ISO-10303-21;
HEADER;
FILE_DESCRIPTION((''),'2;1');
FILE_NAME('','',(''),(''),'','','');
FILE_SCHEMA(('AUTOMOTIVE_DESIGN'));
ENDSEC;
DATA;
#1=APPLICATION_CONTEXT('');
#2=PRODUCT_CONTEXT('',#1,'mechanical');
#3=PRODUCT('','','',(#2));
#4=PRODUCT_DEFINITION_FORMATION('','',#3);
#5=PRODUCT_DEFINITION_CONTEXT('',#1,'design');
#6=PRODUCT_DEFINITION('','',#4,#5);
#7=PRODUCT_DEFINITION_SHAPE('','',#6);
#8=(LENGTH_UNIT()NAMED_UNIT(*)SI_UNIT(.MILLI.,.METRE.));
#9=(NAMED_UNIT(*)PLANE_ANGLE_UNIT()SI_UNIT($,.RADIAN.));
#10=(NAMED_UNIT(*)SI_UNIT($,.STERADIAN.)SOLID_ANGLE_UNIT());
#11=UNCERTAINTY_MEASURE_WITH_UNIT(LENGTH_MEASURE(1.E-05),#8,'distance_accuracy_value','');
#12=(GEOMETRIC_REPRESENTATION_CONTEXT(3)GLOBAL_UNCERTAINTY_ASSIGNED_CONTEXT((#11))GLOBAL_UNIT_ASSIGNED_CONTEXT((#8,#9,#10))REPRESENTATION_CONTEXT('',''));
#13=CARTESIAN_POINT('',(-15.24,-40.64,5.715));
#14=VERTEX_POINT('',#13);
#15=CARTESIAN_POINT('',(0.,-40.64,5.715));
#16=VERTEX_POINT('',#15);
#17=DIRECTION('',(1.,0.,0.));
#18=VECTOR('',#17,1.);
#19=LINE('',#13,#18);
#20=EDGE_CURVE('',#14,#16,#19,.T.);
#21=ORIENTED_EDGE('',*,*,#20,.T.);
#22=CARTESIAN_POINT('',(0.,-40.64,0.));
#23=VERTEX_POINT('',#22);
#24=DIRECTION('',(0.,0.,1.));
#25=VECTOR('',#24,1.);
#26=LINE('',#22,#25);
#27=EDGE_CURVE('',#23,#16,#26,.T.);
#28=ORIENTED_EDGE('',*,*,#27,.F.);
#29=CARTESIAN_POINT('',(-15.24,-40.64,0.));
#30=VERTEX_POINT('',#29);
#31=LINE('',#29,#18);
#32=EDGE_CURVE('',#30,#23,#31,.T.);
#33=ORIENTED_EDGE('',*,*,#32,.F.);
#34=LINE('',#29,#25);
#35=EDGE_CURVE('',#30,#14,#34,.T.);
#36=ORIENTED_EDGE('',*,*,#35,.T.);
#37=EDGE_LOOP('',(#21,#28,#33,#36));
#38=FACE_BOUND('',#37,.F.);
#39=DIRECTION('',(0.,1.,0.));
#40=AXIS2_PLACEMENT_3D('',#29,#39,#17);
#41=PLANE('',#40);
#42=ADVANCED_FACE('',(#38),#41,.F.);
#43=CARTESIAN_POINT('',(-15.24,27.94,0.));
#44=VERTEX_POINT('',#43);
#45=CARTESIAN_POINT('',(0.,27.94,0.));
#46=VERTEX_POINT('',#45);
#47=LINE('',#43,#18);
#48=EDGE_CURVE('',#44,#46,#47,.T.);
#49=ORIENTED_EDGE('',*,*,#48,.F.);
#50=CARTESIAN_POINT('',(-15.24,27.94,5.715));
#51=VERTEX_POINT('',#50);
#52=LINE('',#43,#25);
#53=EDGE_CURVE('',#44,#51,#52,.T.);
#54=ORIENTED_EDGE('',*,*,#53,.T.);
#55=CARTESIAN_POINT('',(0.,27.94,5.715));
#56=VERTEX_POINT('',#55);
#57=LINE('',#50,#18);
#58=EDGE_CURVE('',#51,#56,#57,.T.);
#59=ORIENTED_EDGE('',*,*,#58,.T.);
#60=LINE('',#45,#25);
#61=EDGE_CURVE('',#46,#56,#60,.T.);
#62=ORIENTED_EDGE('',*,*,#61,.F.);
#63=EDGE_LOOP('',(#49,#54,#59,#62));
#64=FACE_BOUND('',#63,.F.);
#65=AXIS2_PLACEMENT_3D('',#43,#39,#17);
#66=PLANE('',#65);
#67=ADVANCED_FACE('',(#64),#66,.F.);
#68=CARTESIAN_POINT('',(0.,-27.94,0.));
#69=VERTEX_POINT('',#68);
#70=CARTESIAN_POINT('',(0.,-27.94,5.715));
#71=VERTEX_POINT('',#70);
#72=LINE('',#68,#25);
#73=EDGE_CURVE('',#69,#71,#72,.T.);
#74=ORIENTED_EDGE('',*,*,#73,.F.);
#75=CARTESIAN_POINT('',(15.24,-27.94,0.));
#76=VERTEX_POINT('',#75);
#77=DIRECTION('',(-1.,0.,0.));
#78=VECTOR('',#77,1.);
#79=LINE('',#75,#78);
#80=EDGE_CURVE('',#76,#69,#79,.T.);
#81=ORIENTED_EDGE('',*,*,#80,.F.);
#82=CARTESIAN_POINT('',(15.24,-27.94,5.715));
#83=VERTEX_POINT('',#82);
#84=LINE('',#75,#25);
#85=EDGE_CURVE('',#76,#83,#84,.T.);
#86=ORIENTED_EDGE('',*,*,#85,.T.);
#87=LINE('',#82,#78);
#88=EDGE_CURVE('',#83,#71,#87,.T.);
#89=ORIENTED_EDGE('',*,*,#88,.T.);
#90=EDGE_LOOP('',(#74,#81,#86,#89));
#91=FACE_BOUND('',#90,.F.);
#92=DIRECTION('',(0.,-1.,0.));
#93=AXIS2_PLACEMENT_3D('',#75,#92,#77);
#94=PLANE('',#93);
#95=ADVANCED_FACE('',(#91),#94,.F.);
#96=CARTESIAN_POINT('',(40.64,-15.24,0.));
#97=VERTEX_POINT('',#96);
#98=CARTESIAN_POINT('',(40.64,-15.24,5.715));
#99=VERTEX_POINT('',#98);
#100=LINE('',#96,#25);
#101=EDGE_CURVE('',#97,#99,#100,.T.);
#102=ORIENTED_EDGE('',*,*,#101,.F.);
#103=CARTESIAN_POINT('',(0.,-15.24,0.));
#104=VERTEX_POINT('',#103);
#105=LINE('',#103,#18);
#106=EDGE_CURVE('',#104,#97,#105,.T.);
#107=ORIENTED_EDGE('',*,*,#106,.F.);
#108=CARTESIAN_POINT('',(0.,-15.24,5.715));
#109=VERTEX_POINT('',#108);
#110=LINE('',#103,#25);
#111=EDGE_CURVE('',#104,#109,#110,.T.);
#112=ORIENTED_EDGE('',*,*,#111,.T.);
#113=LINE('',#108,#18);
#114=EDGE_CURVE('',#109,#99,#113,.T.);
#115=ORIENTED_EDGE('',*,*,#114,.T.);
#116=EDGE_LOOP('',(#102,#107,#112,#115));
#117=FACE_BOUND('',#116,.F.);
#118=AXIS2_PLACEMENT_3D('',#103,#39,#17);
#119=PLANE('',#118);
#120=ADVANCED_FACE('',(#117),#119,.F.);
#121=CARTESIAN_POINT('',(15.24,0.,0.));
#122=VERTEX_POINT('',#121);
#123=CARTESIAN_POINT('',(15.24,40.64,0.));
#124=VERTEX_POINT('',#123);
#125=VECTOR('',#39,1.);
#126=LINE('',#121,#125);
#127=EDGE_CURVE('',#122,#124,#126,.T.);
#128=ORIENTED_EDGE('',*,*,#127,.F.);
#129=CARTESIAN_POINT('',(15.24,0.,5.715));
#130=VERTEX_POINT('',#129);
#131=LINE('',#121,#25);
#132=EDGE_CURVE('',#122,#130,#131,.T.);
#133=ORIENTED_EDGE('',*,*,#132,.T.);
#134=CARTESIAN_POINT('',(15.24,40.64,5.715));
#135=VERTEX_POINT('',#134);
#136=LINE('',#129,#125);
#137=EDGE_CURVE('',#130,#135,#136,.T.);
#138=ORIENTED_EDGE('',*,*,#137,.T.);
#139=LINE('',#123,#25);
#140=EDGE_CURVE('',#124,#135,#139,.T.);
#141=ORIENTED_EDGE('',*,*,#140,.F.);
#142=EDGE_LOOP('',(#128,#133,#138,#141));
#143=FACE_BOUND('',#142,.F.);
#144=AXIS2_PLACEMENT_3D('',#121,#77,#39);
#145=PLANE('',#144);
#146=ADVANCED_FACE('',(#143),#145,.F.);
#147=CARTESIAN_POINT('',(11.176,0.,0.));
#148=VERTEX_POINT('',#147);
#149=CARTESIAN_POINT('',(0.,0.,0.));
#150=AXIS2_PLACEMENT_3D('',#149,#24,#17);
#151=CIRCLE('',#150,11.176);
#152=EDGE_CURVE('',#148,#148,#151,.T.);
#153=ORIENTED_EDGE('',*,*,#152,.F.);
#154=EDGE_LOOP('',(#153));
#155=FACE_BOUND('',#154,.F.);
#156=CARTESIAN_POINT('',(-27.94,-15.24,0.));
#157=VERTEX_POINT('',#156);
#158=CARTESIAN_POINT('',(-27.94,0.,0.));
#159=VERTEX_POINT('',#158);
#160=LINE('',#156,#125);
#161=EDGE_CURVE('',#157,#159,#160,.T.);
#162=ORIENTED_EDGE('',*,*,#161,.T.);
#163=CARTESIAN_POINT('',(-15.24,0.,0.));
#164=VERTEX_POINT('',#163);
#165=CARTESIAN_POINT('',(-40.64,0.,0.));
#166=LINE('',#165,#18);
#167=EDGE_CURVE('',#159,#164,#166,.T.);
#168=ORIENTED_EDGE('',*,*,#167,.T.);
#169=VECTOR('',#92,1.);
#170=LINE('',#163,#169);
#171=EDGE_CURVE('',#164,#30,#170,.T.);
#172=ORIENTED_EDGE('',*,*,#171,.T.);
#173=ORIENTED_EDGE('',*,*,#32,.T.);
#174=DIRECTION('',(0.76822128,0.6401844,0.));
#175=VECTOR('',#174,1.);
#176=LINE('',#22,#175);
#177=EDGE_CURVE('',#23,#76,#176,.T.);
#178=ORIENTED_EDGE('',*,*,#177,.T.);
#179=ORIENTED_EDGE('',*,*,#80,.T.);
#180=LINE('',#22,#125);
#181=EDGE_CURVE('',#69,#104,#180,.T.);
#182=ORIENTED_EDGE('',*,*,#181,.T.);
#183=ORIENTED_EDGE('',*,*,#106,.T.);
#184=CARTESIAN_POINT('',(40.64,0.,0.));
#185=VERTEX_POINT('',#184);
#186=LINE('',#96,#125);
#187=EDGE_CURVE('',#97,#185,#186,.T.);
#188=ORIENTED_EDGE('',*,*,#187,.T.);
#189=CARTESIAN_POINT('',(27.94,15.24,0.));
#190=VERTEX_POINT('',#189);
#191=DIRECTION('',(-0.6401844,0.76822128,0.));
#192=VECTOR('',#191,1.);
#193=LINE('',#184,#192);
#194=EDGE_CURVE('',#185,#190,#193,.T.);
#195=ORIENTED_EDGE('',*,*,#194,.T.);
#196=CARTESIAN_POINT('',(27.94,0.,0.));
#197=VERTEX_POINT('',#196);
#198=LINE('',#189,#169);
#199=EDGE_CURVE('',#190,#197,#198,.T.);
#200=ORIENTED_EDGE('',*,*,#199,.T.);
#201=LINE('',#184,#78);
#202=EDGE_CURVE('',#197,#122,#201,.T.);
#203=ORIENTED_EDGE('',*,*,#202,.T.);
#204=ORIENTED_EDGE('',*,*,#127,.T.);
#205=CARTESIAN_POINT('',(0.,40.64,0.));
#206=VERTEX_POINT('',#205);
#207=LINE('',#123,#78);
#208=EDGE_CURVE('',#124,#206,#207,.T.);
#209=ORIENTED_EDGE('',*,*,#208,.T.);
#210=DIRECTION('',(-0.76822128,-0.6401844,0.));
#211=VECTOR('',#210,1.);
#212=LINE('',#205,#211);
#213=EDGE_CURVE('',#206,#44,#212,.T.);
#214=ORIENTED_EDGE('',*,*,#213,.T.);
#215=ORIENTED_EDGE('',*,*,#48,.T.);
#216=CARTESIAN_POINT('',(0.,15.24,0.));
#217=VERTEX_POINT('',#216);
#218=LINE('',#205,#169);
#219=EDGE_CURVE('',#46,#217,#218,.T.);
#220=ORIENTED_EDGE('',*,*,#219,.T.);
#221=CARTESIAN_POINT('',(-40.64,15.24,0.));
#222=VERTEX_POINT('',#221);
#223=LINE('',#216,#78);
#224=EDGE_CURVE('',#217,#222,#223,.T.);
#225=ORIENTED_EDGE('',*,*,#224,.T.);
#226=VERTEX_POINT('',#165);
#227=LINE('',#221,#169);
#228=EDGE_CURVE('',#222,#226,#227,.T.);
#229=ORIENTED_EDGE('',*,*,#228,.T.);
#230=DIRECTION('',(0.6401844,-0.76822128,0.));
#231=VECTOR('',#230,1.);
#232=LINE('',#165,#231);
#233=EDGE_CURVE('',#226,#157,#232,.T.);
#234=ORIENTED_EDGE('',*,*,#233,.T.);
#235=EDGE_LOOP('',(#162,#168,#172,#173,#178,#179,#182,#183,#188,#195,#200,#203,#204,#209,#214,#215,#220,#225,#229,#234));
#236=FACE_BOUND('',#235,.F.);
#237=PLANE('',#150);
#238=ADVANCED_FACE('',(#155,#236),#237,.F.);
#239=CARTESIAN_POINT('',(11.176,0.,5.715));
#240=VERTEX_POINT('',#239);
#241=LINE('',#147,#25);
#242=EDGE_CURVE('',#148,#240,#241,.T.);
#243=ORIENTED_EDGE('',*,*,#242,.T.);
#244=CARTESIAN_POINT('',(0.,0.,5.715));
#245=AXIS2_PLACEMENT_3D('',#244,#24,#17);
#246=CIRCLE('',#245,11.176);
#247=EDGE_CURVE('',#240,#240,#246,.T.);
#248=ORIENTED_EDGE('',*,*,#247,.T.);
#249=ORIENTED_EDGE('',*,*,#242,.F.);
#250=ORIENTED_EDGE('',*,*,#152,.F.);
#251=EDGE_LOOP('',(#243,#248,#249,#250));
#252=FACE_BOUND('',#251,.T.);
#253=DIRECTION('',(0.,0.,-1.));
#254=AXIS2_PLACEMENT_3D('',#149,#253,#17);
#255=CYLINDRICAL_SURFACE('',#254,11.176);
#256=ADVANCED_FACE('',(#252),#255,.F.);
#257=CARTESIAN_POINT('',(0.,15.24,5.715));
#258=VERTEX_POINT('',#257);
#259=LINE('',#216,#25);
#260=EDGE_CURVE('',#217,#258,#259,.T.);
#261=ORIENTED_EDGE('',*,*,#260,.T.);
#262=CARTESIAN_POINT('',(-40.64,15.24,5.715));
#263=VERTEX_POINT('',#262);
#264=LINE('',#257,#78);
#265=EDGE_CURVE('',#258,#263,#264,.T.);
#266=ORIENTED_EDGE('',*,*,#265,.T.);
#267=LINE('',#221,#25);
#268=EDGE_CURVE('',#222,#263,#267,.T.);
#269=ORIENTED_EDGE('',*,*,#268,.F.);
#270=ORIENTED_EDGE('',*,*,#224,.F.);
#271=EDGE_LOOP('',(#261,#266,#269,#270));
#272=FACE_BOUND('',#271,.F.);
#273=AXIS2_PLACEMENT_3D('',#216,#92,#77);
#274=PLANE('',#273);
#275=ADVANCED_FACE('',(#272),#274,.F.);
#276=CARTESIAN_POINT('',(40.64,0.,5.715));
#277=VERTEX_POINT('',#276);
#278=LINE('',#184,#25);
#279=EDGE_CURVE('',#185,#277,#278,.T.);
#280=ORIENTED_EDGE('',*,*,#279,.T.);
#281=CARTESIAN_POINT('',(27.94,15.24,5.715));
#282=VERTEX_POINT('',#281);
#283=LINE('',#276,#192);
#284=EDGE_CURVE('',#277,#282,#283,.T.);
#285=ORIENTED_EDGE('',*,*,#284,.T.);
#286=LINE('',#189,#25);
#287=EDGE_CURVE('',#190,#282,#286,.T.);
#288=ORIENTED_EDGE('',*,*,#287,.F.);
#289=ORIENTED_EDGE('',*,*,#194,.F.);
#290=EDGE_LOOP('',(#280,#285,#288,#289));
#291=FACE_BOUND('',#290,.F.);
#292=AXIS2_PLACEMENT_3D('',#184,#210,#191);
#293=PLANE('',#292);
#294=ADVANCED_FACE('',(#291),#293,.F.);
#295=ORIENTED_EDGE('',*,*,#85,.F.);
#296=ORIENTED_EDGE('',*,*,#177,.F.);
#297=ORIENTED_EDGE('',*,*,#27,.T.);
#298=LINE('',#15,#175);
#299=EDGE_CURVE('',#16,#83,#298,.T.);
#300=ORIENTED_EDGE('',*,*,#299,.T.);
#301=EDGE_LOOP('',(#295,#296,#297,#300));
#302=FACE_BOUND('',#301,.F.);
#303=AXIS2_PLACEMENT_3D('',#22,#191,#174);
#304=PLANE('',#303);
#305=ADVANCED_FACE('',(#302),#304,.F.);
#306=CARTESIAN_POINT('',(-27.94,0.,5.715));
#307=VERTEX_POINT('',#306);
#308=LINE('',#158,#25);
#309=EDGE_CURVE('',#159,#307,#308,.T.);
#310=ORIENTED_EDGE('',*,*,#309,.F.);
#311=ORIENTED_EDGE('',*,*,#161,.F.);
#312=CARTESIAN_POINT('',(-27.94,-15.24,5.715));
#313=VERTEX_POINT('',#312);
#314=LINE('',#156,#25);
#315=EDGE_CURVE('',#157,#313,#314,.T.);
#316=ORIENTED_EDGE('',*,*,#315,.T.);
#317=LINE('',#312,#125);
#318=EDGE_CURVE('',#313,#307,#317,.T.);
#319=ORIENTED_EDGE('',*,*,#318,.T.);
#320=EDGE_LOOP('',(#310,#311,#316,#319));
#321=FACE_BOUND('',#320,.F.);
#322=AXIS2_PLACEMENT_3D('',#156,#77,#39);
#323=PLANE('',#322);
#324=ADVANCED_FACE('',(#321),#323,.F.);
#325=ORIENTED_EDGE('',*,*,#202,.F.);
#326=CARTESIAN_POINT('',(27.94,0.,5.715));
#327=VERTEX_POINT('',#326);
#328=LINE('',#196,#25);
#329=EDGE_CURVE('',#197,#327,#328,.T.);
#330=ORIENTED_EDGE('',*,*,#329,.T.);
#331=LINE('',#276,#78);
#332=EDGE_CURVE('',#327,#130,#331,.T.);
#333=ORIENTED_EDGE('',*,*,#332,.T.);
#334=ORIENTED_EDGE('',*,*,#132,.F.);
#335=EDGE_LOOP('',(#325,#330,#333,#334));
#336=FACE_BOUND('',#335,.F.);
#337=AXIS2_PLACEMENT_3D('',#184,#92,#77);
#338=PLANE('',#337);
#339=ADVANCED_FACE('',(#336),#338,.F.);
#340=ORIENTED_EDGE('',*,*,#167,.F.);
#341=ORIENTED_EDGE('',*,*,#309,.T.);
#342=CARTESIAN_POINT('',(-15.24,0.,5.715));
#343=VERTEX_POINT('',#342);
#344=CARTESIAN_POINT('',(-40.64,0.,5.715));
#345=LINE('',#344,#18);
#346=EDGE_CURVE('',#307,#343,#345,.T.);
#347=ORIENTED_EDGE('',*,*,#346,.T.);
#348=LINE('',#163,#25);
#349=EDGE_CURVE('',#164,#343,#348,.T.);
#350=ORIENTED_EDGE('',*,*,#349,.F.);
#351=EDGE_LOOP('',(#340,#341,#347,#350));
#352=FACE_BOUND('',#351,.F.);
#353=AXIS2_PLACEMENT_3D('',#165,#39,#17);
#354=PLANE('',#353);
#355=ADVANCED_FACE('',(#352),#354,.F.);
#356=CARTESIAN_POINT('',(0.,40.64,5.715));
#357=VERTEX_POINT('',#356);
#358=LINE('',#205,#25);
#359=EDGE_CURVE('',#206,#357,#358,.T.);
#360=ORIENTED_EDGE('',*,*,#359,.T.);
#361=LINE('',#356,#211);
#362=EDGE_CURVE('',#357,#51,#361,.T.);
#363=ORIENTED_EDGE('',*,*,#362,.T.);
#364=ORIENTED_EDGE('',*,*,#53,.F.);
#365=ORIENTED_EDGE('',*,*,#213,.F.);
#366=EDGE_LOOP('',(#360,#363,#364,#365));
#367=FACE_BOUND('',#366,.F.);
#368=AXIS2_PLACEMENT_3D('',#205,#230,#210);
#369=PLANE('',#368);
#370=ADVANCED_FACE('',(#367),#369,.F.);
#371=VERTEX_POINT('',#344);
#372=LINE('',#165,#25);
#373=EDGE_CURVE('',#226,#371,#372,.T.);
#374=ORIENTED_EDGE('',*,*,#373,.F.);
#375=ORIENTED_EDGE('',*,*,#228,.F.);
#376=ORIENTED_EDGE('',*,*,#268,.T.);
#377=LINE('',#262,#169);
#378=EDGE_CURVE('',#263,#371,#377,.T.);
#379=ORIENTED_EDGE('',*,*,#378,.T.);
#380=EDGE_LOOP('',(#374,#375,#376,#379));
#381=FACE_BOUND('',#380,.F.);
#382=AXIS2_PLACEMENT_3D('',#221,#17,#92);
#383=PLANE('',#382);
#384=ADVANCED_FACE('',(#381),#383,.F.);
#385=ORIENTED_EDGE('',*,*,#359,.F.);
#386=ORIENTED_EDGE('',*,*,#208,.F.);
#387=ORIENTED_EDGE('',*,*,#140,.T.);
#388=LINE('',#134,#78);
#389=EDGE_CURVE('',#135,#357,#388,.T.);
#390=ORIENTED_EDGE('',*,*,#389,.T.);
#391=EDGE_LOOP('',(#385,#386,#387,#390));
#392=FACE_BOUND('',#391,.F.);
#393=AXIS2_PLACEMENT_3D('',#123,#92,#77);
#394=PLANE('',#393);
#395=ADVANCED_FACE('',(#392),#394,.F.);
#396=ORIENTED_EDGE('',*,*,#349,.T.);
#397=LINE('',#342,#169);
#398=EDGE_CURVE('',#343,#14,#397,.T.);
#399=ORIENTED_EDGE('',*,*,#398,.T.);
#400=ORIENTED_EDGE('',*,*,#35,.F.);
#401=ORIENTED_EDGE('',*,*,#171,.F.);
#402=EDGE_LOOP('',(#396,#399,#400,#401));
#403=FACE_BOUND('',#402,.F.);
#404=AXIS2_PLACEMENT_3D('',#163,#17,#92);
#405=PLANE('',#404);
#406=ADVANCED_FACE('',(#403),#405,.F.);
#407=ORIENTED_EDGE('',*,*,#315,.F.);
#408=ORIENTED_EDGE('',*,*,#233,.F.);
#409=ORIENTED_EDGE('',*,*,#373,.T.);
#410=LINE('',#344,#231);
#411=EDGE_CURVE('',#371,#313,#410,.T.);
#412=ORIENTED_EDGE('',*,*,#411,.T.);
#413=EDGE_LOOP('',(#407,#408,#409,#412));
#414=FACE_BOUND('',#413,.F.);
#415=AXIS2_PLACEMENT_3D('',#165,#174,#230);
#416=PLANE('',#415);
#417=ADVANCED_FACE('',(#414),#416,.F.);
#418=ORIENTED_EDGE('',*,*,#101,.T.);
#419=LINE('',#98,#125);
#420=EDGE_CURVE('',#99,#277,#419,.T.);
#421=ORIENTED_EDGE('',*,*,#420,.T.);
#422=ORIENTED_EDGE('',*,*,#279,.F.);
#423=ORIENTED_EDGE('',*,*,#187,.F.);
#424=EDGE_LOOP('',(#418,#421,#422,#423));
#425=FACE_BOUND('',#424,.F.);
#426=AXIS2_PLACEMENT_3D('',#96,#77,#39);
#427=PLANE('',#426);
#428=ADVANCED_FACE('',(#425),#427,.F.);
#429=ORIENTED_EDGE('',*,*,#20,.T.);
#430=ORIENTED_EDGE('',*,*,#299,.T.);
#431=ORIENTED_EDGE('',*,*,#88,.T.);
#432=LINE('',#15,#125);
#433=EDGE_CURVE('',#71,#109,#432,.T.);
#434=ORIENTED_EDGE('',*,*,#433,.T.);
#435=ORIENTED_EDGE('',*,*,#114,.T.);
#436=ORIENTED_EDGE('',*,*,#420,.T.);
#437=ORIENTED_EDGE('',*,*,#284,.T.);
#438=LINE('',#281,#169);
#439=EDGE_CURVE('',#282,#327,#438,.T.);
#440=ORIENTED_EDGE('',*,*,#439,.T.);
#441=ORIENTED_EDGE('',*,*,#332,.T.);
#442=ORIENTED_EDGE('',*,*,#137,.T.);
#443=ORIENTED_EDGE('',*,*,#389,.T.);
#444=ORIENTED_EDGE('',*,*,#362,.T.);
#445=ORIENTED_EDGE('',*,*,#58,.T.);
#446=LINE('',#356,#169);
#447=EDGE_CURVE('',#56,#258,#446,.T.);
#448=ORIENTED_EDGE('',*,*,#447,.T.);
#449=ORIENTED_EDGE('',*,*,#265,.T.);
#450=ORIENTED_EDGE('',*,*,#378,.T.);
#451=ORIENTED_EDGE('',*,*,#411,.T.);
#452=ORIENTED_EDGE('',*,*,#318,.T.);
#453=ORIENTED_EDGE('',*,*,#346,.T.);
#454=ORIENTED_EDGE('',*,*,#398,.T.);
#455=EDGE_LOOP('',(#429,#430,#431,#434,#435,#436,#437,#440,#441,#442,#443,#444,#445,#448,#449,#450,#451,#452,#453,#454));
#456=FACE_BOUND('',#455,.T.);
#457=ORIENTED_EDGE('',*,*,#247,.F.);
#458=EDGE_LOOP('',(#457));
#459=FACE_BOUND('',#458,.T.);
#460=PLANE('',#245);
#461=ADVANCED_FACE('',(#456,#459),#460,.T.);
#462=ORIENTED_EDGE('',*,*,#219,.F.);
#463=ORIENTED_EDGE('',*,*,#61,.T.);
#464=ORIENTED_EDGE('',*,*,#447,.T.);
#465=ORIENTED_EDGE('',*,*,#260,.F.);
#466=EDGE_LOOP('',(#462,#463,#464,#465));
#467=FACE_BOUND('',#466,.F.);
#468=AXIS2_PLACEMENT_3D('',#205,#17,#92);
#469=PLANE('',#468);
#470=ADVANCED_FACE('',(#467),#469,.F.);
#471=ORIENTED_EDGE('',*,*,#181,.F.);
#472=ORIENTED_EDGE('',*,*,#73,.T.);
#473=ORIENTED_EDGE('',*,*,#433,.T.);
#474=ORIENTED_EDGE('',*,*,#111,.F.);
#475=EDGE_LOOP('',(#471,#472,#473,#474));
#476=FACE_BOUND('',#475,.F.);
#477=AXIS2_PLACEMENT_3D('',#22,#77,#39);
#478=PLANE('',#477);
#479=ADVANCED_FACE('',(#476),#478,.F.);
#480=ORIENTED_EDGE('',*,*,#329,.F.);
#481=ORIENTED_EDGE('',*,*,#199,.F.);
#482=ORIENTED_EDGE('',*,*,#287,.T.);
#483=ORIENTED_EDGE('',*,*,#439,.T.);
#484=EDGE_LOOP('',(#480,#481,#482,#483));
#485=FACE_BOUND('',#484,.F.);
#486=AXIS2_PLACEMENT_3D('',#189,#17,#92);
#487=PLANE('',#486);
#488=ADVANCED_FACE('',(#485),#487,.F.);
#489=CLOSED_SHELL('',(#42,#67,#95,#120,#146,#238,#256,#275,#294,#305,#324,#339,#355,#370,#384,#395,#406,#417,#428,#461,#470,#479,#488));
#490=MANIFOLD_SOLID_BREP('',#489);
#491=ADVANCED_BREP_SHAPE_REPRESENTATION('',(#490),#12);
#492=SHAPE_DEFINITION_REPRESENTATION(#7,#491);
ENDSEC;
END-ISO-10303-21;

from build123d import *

# Parameters (mm, degrees)
F0_R     = 11.176
F1_DEPTH = 5.715
F2_DEPTH = 5.715


# Not quite as in the source:
# - a feature names something its author has since deleted; it is built from what else it names


with BuildPart() as f1:
    # F0 (on Top) → F1 (new body)
    with BuildSketch(Plane.XY):
        with BuildLine():
            ThreePointArc((0, -15.24), (10.7763073453, -10.7763073453), (15.24, 0))
            ThreePointArc((15.24, 0), (10.7763073453, 10.7763073453), (0, 15.24))
            ThreePointArc((0, 15.24), (-10.7763073453, 10.7763073453), (-15.24, 0))
            ThreePointArc((-15.24, 0), (-10.7763073453, -10.7763073453), (0, -15.24))
        make_face()
        Circle(F0_R, mode=Mode.SUBTRACT)
        with BuildLine():
            Line((27.94, 0), (15.24, 0))
            ThreePointArc((15.24, 0), (10.7763073453, -10.7763073453), (0, -15.24))
            Line((0, -15.24), (40.64, -15.24))
            Line((40.64, -15.24), (40.64, 0))
            Line((40.64, 0), (27.94, 0))
        make_face()
        with BuildLine():
            ThreePointArc((0, 15.24), (10.7763073453, 10.7763073453), (15.24, 0))
            Line((15.24, 0), (15.24, 40.64))
            Line((15.24, 40.64), (0, 40.64))
            Line((0, 40.64), (0, 27.94))
            Line((0, 27.94), (0, 15.24))
        make_face()
        with BuildLine():
            ThreePointArc((-15.24, 0), (-10.7763073453, 10.7763073453), (0, 15.24))
            Line((0, 15.24), (-40.64, 15.24))
            Line((-40.64, 15.24), (-40.64, 0))
            Line((-40.64, 0), (-27.94, 0))
            Line((-27.94, 0), (-15.24, 0))
        make_face()
        with BuildLine():
            Line((0, -27.94), (0, -15.24))
            ThreePointArc((0, -15.24), (-10.7763073453, -10.7763073453), (-15.24, 0))
            Line((-15.24, 0), (-15.24, -40.64))
            Line((-15.24, -40.64), (0, -40.64))
            Line((0, -40.64), (0, -27.94))
        make_face()
    extrude(amount=F1_DEPTH)

    # F0 (on Top) → F2 (join)
    with BuildSketch(Plane.XY):
        with BuildLine():
            ThreePointArc((0, -15.24), (10.7763073453, -10.7763073453), (15.24, 0))
            ThreePointArc((15.24, 0), (10.7763073453, 10.7763073453), (0, 15.24))
            ThreePointArc((0, 15.24), (-10.7763073453, 10.7763073453), (-15.24, 0))
            ThreePointArc((-15.24, 0), (-10.7763073453, -10.7763073453), (0, -15.24))
        make_face()
        Circle(F0_R, mode=Mode.SUBTRACT)
        with BuildLine():
            Line((27.94, 0), (15.24, 0))
            ThreePointArc((15.24, 0), (10.7763073453, -10.7763073453), (0, -15.24))
            Line((0, -15.24), (40.64, -15.24))
            Line((40.64, -15.24), (40.64, 0))
            Line((40.64, 0), (27.94, 0))
        make_face()
        with BuildLine():
            ThreePointArc((0, 15.24), (10.7763073453, 10.7763073453), (15.24, 0))
            Line((15.24, 0), (15.24, 40.64))
            Line((15.24, 40.64), (0, 40.64))
            Line((0, 40.64), (0, 27.94))
            Line((0, 27.94), (0, 15.24))
        make_face()
        with BuildLine():
            ThreePointArc((-15.24, 0), (-10.7763073453, 10.7763073453), (0, 15.24))
            Line((0, 15.24), (-40.64, 15.24))
            Line((-40.64, 15.24), (-40.64, 0))
            Line((-40.64, 0), (-27.94, 0))
            Line((-27.94, 0), (-15.24, 0))
        make_face()
        with BuildLine():
            Line((0, -27.94), (0, -15.24))
            ThreePointArc((0, -15.24), (-10.7763073453, -10.7763073453), (-15.24, 0))
            Line((-15.24, 0), (-15.24, -40.64))
            Line((-15.24, -40.64), (0, -40.64))
            Line((0, -40.64), (0, -27.94))
        make_face()
        Polygon((27.94, 15.24), (27.94, 0), (40.64, 0), align=None)
        Polygon((-15.24, 27.94), (0, 27.94), (0, 40.64), align=None)
        Polygon((15.24, -27.94), (0, -27.94), (0, -40.64), align=None)
        Polygon((-27.94, -15.24), (-27.94, 0), (-40.64, 0), align=None)
    extrude(amount=F2_DEPTH)


solid = f1.part
